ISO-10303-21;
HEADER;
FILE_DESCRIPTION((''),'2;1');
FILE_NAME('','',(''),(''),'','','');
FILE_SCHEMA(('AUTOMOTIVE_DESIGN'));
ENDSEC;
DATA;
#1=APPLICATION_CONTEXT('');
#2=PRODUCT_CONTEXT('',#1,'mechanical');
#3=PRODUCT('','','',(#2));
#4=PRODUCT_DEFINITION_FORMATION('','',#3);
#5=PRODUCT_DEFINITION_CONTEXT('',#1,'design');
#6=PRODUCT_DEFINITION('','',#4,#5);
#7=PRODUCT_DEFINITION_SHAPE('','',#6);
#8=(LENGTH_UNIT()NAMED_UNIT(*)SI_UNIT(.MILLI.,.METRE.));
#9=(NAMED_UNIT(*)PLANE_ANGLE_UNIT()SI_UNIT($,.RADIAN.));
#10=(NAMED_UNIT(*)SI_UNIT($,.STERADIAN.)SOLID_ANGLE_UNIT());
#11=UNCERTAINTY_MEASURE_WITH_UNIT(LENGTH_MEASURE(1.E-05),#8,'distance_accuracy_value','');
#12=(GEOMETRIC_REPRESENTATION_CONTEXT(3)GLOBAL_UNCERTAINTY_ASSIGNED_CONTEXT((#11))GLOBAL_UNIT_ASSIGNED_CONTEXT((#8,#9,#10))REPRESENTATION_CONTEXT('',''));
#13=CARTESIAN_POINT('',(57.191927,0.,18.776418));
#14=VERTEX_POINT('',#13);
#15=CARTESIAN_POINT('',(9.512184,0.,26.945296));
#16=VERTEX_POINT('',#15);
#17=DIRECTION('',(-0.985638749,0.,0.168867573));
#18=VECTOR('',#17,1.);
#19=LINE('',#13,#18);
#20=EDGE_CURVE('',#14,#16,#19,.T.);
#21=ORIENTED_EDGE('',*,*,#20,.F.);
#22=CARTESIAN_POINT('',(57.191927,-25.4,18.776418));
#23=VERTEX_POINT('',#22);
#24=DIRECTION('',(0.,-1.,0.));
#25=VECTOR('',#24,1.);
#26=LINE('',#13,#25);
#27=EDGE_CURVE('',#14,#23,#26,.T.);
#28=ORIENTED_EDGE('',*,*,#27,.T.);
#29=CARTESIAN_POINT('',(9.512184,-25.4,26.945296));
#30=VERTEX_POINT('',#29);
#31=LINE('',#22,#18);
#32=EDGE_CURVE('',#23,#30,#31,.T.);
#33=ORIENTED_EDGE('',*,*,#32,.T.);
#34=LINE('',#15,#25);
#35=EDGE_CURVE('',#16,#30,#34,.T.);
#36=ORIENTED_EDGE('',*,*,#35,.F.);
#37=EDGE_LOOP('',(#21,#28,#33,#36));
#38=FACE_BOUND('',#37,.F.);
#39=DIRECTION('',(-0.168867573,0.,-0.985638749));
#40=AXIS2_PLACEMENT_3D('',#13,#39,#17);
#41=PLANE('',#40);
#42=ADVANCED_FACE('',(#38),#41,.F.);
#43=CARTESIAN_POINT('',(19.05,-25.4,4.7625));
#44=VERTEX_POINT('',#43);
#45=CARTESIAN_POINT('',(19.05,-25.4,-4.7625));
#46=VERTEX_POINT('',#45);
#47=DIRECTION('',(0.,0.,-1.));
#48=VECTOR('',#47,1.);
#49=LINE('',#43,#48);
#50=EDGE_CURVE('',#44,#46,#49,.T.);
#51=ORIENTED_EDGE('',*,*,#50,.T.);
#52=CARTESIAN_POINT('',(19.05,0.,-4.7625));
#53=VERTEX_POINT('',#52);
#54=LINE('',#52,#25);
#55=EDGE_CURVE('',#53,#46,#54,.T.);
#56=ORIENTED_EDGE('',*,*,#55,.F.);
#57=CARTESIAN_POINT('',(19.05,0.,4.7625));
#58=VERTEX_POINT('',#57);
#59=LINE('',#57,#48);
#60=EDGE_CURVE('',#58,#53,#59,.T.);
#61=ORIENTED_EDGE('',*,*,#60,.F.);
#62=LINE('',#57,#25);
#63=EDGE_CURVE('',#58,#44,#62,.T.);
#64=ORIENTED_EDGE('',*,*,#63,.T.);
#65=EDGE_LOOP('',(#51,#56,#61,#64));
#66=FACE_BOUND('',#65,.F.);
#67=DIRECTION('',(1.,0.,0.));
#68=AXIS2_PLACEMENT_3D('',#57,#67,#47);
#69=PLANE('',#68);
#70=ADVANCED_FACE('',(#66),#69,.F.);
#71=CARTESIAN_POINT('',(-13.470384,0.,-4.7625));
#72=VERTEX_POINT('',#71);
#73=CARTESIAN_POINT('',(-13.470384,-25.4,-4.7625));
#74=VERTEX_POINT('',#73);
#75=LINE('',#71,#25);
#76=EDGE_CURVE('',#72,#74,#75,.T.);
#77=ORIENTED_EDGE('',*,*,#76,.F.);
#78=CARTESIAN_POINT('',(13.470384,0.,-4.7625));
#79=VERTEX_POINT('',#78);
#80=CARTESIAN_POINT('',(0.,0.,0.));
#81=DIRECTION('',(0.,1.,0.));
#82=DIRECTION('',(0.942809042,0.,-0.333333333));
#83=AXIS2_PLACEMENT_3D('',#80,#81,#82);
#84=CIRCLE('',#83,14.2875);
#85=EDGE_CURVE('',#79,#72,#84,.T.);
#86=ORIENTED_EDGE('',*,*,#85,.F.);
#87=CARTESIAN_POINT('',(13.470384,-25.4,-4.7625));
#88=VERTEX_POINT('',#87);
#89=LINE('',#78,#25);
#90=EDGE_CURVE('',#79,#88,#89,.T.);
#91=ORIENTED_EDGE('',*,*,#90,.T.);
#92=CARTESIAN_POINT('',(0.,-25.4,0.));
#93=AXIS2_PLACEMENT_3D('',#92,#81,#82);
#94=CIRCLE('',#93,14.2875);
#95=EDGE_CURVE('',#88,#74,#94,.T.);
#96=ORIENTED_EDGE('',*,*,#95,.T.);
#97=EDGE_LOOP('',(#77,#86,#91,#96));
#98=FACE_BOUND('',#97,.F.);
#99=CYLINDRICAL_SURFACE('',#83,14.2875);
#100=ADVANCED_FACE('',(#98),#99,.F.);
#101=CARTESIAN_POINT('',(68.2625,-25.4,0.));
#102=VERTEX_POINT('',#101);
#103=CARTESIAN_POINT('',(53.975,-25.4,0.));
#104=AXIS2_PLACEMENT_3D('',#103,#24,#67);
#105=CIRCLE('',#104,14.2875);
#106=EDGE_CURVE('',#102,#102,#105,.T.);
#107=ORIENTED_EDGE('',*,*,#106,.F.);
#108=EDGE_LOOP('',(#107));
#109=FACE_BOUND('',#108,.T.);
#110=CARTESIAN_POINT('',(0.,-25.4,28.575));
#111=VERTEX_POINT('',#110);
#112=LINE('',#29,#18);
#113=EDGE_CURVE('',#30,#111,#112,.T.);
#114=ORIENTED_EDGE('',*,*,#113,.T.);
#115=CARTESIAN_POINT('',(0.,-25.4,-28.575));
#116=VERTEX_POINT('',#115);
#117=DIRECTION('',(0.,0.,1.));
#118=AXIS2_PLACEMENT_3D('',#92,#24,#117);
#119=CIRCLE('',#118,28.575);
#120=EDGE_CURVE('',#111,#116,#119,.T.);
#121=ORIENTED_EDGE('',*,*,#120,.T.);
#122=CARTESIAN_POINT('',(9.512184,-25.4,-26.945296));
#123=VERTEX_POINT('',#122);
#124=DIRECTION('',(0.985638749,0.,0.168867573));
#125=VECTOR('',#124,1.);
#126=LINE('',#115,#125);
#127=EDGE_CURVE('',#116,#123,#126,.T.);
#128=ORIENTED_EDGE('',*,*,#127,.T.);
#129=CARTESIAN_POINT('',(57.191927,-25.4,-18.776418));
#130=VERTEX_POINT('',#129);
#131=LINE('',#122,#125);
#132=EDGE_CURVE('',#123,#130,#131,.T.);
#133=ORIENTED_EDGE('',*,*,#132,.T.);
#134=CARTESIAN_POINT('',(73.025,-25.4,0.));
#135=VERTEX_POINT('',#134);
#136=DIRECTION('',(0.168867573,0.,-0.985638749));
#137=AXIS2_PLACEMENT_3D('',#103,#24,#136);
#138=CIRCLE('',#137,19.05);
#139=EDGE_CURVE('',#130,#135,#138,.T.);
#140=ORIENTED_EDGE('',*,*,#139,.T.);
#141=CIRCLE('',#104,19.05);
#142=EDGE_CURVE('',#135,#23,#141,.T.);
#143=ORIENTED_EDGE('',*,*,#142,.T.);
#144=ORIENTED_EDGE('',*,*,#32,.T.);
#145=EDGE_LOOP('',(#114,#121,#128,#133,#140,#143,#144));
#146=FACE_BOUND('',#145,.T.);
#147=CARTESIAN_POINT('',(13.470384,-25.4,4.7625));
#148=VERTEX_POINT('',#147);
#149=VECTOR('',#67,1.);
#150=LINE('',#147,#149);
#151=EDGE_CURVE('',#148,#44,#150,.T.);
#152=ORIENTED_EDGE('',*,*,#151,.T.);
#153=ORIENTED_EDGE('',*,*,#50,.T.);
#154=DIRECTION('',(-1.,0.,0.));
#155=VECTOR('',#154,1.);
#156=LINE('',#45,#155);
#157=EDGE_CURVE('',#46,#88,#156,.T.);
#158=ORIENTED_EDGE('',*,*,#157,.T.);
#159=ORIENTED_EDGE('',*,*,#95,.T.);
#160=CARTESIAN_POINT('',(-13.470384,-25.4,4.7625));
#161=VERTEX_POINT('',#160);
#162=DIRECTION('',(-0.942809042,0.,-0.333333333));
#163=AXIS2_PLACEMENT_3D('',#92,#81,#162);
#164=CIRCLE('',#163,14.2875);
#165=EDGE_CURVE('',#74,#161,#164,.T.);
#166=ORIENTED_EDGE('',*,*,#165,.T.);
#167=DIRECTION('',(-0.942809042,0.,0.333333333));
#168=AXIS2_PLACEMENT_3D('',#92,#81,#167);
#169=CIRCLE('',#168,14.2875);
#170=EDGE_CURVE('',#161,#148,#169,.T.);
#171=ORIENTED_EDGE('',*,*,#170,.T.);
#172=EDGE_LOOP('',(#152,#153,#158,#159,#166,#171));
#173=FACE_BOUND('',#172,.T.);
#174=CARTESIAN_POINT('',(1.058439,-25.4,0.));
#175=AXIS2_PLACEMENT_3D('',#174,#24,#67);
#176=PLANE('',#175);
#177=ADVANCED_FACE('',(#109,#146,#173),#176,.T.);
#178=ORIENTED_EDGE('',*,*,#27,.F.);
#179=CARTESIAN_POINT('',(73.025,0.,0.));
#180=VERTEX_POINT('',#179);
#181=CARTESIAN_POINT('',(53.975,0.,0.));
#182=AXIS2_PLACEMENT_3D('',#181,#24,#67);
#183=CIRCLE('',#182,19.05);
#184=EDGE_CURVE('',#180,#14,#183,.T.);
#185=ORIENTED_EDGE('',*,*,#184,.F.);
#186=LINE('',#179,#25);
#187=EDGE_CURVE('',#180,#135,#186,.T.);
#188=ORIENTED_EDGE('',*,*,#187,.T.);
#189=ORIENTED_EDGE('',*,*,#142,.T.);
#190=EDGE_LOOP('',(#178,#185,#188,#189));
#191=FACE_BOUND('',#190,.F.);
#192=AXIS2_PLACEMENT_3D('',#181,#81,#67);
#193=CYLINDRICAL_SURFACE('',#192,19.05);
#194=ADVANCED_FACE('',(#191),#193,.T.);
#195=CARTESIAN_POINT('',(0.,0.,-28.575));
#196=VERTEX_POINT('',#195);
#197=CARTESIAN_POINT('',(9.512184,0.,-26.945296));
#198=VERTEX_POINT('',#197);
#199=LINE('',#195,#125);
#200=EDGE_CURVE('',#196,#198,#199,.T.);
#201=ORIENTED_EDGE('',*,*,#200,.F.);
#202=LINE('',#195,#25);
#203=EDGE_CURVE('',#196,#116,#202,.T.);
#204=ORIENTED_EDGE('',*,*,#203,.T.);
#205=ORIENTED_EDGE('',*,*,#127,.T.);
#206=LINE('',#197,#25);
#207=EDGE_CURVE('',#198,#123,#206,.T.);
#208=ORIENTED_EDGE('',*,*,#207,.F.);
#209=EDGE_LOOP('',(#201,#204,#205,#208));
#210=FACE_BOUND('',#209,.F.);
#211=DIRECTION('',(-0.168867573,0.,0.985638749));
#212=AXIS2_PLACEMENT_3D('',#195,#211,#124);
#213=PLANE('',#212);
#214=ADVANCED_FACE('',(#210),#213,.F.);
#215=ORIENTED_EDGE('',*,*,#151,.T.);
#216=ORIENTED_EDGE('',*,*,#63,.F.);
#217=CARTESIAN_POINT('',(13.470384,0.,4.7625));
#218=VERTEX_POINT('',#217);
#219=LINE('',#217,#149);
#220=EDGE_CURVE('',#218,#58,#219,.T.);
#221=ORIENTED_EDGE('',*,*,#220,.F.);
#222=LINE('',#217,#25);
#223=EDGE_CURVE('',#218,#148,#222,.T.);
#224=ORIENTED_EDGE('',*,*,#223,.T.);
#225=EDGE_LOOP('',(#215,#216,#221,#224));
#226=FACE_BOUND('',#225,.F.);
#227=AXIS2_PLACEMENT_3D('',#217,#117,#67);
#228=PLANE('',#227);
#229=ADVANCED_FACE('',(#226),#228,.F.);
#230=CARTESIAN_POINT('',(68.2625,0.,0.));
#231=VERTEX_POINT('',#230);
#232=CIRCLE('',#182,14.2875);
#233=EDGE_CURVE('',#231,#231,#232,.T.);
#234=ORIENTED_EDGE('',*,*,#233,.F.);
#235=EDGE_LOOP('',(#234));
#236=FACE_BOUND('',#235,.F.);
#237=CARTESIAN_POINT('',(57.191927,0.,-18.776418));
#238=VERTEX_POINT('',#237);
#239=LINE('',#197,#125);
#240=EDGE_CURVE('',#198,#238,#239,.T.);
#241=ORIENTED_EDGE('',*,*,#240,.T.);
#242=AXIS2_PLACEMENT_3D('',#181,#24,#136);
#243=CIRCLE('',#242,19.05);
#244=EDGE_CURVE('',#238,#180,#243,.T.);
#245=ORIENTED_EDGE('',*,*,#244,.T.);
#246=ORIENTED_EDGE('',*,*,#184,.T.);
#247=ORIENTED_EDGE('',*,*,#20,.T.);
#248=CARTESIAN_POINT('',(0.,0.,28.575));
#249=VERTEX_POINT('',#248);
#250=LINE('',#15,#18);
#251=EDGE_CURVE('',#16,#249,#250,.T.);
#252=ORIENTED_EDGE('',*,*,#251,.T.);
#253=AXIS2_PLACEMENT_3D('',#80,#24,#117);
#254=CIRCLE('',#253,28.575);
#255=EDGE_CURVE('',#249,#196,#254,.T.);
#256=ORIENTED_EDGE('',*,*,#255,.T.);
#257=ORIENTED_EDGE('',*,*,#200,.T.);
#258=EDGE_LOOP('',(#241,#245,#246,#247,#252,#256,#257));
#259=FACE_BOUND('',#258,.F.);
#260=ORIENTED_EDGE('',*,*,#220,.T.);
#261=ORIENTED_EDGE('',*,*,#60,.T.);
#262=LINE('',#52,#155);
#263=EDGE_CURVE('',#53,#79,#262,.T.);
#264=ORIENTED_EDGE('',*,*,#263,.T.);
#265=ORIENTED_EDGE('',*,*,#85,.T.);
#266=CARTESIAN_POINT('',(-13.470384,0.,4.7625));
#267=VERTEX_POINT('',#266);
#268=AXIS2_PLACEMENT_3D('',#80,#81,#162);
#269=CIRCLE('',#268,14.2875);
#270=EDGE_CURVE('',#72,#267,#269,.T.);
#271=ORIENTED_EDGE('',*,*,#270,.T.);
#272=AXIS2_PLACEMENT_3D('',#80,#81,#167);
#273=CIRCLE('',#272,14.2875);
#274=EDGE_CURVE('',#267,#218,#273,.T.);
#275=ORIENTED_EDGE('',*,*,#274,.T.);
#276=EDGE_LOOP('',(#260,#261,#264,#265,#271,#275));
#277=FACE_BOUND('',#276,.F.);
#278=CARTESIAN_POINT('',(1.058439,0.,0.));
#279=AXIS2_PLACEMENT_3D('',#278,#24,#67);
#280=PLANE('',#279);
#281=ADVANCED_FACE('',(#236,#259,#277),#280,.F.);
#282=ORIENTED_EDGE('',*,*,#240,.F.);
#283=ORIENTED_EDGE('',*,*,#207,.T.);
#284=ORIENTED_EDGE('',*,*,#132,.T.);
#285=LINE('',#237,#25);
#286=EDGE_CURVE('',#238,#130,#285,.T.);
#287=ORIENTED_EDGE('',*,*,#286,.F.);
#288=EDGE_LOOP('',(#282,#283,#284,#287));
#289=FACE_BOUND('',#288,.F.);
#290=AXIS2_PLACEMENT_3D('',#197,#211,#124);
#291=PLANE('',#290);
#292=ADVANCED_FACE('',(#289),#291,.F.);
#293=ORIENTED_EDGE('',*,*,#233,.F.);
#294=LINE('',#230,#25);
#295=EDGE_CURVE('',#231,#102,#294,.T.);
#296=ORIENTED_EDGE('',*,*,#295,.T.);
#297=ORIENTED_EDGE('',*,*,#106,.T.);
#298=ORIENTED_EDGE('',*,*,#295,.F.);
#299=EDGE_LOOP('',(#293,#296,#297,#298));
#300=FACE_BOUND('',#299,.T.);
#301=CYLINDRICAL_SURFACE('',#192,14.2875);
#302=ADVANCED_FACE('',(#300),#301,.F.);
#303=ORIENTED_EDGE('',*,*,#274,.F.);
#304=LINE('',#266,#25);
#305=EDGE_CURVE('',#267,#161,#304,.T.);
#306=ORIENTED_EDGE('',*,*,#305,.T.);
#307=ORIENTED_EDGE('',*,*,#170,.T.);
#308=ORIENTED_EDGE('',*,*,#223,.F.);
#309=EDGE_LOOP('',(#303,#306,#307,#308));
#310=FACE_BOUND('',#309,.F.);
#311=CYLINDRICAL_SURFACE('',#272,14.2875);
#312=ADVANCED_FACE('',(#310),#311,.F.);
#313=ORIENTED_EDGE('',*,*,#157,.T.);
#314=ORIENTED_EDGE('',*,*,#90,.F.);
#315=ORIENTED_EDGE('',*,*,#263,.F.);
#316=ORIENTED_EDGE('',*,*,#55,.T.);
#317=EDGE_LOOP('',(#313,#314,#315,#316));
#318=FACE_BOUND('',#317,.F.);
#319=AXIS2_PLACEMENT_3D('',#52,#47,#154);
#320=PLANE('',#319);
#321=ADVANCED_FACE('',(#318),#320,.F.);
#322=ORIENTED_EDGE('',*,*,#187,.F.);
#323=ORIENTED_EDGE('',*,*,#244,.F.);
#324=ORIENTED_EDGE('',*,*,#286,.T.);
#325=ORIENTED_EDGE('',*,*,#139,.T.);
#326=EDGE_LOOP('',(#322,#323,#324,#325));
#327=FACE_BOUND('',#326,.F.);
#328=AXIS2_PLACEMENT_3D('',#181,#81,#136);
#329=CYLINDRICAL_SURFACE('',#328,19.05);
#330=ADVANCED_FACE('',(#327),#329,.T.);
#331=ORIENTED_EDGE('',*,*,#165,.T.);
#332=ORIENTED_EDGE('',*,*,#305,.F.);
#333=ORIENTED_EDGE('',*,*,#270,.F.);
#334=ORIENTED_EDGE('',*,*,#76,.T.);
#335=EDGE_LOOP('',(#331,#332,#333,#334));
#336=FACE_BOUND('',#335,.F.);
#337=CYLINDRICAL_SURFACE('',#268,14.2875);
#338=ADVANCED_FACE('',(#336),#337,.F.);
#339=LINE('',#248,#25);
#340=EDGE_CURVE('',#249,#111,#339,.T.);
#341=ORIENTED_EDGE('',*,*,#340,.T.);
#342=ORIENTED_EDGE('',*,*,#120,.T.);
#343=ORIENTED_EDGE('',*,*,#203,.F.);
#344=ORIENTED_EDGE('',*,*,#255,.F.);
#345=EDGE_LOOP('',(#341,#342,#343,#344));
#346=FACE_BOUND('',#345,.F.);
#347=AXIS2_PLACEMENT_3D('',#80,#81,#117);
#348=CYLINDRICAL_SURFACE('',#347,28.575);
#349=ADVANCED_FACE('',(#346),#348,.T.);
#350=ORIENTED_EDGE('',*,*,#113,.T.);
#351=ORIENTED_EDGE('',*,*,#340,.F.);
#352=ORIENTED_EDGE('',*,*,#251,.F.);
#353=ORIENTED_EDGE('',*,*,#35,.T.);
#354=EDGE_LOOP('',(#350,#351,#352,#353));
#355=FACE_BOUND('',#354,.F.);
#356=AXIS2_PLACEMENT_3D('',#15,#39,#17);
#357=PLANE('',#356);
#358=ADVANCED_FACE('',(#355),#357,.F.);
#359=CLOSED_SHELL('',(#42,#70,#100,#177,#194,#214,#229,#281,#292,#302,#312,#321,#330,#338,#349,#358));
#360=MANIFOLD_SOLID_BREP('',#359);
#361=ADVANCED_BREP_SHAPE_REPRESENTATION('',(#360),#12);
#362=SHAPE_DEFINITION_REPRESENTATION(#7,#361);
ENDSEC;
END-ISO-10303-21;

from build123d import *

# Parameters (mm, degrees)
F0_R     = 14.2875
F1_DEPTH = 25.4


with BuildPart() as f1:
    # F0 (on Front) → F1 (new body)
    with BuildSketch(Plane.XZ):
        with BuildLine():
            Line((9.5121844836, 26.9452959039), (0, 28.575))
            ThreePointArc((0, 28.575), (-28.575, 0), (0, -28.575))
            Line((0, -28.575), (9.5121844836, -26.9452959039))
            ThreePointArc((9.5121844836, -26.9452959039), (23.3274655355, -16.5033322905), (28.575, 0))
            ThreePointArc((28.575, 0), (23.3274655355, 16.5033322905), (9.5121844836, 26.9452959039))
        make_face()
        with BuildLine():
            ThreePointArc((-13.4703841816, 4.7625), (0, 14.2875), (13.4703841816, 4.7625))
            Line((13.4703841816, 4.7625), (19.05, 4.7625))
            Line((19.05, 4.7625), (19.05, -4.7625))
            Line((19.05, -4.7625), (13.4703841816, -4.7625))
            ThreePointArc((13.4703841816, -4.7625), (0, -14.2875), (-13.4703841816, -4.7625))
            Line((-13.4703841816, -4.7625), (-19.05, -4.7625))
            Line((-19.05, -4.7625), (-19.05, 4.7625))
            Line((-19.05, 4.7625), (-13.4703841816, 4.7625))
        make_face(mode=Mode.SUBTRACT)
        with BuildLine():
            Line((57.1919272622, 18.7764181619), (9.5121844836, 26.9452959039))
            ThreePointArc((9.5121844836, 26.9452959039), (23.3274655355, 16.5033322905), (28.575, 0))
            ThreePointArc((28.575, 0), (23.3274655355, -16.5033322905), (9.5121844836, -26.9452959039))
            Line((9.5121844836, -26.9452959039), (57.1919272622, -18.7764181619))
            ThreePointArc((57.1919272622, -18.7764181619), (34.925, 0), (57.1919272622, 18.7764181619))
        make_face()
        with BuildLine():
            ThreePointArc((73.025, 0), (68.5383952831, 12.2804730295), (57.1919272622, 18.7764181619))
            ThreePointArc((57.1919272622, 18.7764181619), (34.925, 0), (57.1919272622, -18.7764181619))
            ThreePointArc((57.1919272622, -18.7764181619), (68.5383952831, -12.2804730295), (73.025, 0))
        make_face()
        with Locations((53.975, 0)):
            Circle(F0_R, mode=Mode.SUBTRACT)
        with BuildLine():
            ThreePointArc((-13.4703841816, -4.7625), (-14.2875, 0), (-13.4703841816, 4.7625))
            Line((-13.4703841816, 4.7625), (-19.05, 4.7625))
            Line((-19.05, 4.7625), (-19.05, -4.7625))
            Line((-19.05, -4.7625), (-13.4703841816, -4.7625))
        make_face()
    extrude(amount=F1_DEPTH)


solid = f1.part
